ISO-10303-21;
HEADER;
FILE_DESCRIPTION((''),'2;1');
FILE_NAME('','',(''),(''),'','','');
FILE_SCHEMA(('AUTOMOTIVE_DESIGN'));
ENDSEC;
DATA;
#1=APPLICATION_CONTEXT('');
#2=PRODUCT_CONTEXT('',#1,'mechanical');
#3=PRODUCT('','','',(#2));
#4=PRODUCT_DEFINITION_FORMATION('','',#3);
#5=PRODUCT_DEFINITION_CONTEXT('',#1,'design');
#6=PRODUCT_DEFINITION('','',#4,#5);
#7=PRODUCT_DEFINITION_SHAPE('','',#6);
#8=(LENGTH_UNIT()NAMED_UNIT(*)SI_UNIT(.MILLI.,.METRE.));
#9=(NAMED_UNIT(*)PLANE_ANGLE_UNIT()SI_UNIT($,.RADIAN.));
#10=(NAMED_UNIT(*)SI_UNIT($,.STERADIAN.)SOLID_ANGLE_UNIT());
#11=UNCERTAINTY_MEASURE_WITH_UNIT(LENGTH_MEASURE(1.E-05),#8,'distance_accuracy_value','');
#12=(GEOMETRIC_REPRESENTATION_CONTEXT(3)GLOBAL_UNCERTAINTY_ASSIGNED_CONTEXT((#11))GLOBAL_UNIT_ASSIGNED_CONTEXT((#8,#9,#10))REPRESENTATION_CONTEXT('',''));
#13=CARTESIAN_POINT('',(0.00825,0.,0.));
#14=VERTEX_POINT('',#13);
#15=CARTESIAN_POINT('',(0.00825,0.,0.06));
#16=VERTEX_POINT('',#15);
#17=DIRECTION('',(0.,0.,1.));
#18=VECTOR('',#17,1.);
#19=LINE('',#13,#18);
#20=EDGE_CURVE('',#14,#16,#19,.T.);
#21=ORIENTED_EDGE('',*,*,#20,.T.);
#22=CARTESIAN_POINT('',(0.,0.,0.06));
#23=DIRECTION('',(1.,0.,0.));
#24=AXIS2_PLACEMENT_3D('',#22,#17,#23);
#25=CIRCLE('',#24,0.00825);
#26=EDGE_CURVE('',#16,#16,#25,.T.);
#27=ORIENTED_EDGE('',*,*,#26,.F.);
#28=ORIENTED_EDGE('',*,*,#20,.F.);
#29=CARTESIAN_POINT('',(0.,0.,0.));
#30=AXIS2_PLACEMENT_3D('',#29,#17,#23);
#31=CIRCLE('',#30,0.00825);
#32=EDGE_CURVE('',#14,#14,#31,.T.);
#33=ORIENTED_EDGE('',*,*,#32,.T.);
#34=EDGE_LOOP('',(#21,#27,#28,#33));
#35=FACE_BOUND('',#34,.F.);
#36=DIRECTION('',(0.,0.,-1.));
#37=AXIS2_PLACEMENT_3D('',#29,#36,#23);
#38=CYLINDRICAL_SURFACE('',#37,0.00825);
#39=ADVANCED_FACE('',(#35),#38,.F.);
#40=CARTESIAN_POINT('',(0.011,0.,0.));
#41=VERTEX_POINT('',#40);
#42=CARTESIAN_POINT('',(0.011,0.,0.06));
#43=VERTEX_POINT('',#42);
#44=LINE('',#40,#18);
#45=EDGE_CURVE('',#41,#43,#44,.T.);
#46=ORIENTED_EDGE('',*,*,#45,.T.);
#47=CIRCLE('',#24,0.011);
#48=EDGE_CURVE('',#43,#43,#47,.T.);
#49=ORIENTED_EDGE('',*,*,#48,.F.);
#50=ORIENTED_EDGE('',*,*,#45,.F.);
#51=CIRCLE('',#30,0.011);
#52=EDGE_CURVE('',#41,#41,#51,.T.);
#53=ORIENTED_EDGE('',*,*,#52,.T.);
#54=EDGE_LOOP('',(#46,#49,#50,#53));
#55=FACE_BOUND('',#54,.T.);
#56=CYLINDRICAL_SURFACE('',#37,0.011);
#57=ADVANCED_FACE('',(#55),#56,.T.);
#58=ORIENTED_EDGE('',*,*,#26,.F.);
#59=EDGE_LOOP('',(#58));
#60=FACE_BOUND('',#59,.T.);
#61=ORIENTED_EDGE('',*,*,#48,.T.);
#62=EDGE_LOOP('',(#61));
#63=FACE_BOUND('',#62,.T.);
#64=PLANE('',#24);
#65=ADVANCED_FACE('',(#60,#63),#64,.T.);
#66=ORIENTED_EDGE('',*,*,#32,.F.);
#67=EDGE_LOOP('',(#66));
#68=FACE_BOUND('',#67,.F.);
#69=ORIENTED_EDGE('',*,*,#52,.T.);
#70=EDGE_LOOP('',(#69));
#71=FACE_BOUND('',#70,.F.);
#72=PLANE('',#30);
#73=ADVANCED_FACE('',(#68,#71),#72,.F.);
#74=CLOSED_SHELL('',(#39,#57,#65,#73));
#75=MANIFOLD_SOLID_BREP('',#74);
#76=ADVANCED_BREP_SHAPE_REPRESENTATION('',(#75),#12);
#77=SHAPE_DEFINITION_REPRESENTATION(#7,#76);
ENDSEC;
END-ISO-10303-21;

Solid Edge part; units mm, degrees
sketch "Sketch1" plane through (0, 0, 0) normal (0, 0, 1) x (1, 0, 0)
  circle A0 centre (0, 0) radius 0.011
  circle A1 centre (0, 0) radius 0.00825
  dimension "D1" = 0.0165
  dimension "D2" = 0.022
extrude "Protrusion1" add sketch "Sketch1" along normal blind 0.06
